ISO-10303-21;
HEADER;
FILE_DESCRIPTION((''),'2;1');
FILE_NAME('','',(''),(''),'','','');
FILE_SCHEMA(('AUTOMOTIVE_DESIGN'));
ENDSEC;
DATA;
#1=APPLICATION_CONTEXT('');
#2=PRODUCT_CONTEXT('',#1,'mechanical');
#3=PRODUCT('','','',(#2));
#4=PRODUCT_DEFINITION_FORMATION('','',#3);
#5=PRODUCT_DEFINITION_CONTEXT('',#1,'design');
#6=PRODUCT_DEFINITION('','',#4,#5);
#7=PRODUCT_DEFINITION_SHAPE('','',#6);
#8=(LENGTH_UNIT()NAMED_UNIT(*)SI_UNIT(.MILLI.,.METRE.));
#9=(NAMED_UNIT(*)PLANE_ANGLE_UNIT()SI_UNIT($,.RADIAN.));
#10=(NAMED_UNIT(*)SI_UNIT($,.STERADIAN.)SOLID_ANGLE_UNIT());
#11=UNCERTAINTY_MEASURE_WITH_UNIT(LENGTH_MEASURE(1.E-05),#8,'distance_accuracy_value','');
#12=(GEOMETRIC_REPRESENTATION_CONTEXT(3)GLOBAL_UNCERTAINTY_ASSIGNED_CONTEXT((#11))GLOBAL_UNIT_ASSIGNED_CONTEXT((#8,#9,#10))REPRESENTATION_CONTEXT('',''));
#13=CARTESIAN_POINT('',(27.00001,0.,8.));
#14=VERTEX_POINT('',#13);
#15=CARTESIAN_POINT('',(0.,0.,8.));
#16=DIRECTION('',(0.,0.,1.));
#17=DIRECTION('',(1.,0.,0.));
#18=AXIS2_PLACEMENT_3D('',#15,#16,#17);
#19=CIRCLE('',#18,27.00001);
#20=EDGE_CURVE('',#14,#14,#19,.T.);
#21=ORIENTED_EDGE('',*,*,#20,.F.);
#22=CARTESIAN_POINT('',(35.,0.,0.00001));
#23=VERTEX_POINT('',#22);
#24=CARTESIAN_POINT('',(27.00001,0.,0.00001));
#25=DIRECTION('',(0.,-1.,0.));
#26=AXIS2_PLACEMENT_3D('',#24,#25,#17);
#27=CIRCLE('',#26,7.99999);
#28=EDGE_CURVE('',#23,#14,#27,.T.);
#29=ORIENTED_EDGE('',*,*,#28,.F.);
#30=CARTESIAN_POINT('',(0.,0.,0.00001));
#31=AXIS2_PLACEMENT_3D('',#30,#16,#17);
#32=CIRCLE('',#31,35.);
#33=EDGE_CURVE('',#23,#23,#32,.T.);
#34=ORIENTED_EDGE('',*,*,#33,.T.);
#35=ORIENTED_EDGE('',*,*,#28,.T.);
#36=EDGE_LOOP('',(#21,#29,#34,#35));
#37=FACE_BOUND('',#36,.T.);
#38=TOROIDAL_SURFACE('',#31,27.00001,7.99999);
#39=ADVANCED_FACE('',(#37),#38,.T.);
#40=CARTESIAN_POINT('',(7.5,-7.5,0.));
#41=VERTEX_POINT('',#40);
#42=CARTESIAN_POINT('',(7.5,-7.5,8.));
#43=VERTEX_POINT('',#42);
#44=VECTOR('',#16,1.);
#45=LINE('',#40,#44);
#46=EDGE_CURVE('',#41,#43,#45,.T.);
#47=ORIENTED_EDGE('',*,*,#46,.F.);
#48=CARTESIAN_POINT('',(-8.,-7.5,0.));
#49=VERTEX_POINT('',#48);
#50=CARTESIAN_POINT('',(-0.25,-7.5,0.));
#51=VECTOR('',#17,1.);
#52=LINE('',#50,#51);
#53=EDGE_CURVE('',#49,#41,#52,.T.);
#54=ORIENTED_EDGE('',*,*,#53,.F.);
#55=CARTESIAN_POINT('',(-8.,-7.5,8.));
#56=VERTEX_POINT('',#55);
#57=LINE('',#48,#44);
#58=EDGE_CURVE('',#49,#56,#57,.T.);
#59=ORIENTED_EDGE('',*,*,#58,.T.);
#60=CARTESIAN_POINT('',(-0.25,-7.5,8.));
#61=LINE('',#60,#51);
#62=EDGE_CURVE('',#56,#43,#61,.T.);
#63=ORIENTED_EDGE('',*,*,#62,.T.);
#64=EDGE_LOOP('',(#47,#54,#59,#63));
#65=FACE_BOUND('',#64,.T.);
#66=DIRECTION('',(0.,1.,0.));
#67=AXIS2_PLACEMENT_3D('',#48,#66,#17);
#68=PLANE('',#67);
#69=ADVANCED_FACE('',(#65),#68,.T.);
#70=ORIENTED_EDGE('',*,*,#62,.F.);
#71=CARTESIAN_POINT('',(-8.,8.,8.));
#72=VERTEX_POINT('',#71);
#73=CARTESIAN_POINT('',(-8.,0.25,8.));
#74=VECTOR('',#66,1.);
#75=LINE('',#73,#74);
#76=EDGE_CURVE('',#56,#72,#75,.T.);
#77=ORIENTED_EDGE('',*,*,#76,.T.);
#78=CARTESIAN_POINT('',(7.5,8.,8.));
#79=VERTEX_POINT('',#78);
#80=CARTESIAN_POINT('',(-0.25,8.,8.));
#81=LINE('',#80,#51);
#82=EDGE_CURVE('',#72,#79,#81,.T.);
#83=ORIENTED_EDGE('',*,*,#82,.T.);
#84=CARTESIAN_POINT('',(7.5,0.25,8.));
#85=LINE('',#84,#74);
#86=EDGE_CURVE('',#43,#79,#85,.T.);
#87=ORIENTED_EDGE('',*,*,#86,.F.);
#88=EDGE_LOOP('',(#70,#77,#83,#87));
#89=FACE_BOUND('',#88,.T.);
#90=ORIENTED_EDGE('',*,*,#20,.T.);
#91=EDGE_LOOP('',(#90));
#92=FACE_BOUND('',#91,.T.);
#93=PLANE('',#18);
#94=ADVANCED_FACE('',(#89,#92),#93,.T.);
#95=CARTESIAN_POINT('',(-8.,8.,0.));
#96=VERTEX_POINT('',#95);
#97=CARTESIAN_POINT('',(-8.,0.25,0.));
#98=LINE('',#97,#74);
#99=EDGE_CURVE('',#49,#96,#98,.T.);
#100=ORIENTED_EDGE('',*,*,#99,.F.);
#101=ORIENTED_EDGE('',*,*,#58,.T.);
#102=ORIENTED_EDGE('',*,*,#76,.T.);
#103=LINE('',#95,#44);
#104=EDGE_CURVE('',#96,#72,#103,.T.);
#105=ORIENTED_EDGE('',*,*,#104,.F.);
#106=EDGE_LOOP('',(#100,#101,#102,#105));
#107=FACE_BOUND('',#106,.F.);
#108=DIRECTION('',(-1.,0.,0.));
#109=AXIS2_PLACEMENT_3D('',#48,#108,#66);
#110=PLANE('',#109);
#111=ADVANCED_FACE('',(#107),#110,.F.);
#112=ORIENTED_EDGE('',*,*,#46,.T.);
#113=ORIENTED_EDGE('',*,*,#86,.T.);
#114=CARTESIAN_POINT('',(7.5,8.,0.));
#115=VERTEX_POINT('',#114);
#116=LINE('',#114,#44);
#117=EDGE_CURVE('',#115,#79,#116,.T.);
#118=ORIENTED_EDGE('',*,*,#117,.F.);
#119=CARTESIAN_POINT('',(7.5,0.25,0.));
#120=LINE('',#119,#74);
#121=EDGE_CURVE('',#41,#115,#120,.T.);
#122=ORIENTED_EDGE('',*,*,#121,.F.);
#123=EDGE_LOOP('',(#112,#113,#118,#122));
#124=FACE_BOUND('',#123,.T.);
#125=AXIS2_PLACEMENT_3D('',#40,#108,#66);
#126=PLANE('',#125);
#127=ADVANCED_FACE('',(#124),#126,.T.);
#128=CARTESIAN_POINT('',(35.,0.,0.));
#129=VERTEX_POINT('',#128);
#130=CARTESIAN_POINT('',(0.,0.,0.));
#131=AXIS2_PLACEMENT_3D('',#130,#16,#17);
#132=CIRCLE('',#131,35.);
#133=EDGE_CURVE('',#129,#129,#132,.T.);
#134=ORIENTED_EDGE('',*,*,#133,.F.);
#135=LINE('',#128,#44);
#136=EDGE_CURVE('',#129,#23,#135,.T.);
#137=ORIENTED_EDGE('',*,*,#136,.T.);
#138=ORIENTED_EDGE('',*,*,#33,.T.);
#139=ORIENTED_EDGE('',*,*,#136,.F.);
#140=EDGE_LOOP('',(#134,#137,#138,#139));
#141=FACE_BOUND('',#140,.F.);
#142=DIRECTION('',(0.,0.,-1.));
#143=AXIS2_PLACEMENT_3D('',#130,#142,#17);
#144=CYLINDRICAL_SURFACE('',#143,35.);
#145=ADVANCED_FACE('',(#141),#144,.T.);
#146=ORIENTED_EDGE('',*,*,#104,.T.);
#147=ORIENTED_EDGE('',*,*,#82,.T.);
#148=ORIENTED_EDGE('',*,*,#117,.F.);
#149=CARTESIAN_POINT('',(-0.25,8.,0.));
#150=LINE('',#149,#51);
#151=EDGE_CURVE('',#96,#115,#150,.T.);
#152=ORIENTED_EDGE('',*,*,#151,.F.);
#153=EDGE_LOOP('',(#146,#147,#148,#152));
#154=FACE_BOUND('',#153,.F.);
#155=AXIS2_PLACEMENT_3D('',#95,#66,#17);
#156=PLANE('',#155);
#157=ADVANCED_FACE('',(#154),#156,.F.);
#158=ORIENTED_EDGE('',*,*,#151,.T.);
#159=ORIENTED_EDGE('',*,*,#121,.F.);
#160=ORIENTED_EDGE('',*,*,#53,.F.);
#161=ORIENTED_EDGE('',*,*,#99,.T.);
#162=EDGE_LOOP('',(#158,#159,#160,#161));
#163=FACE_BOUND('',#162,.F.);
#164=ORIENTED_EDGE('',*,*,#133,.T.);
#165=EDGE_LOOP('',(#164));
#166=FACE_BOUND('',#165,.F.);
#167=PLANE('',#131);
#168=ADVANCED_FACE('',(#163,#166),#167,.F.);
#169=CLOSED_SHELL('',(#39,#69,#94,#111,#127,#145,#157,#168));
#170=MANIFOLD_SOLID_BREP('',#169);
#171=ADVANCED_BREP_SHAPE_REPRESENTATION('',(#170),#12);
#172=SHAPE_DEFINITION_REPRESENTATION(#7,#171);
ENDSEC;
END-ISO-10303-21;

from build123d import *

# Parameters (mm, degrees)
F0_R     = 35
F0_W     = 15.5
F0_H     = 15.5
F1_DEPTH = 8
F2_R     = 7.99999


# Not quite as in the source:
# - a fillet or chamfer is up to 0.001 mm smaller than in the source, because OpenCascade refuses the exact size


with BuildPart() as f1:
    # F0 (on Top) → F1 (new body)
    with BuildSketch(Plane.XY):
        Circle(F0_R)
        with Locations((-0.25, 0.25)):
            Rectangle(F0_W, F0_H, mode=Mode.SUBTRACT)
    extrude(amount=F1_DEPTH)

    # F2 (radius 8 in the source; OpenCascade refuses exactly that, so slightly less here)
    f2_edges = [f1.edges().sort_by_distance(p)[0] for p in [
        (-35, 0, 8),
    ]]
    fillet(f2_edges, radius=F2_R)


solid = f1.part
